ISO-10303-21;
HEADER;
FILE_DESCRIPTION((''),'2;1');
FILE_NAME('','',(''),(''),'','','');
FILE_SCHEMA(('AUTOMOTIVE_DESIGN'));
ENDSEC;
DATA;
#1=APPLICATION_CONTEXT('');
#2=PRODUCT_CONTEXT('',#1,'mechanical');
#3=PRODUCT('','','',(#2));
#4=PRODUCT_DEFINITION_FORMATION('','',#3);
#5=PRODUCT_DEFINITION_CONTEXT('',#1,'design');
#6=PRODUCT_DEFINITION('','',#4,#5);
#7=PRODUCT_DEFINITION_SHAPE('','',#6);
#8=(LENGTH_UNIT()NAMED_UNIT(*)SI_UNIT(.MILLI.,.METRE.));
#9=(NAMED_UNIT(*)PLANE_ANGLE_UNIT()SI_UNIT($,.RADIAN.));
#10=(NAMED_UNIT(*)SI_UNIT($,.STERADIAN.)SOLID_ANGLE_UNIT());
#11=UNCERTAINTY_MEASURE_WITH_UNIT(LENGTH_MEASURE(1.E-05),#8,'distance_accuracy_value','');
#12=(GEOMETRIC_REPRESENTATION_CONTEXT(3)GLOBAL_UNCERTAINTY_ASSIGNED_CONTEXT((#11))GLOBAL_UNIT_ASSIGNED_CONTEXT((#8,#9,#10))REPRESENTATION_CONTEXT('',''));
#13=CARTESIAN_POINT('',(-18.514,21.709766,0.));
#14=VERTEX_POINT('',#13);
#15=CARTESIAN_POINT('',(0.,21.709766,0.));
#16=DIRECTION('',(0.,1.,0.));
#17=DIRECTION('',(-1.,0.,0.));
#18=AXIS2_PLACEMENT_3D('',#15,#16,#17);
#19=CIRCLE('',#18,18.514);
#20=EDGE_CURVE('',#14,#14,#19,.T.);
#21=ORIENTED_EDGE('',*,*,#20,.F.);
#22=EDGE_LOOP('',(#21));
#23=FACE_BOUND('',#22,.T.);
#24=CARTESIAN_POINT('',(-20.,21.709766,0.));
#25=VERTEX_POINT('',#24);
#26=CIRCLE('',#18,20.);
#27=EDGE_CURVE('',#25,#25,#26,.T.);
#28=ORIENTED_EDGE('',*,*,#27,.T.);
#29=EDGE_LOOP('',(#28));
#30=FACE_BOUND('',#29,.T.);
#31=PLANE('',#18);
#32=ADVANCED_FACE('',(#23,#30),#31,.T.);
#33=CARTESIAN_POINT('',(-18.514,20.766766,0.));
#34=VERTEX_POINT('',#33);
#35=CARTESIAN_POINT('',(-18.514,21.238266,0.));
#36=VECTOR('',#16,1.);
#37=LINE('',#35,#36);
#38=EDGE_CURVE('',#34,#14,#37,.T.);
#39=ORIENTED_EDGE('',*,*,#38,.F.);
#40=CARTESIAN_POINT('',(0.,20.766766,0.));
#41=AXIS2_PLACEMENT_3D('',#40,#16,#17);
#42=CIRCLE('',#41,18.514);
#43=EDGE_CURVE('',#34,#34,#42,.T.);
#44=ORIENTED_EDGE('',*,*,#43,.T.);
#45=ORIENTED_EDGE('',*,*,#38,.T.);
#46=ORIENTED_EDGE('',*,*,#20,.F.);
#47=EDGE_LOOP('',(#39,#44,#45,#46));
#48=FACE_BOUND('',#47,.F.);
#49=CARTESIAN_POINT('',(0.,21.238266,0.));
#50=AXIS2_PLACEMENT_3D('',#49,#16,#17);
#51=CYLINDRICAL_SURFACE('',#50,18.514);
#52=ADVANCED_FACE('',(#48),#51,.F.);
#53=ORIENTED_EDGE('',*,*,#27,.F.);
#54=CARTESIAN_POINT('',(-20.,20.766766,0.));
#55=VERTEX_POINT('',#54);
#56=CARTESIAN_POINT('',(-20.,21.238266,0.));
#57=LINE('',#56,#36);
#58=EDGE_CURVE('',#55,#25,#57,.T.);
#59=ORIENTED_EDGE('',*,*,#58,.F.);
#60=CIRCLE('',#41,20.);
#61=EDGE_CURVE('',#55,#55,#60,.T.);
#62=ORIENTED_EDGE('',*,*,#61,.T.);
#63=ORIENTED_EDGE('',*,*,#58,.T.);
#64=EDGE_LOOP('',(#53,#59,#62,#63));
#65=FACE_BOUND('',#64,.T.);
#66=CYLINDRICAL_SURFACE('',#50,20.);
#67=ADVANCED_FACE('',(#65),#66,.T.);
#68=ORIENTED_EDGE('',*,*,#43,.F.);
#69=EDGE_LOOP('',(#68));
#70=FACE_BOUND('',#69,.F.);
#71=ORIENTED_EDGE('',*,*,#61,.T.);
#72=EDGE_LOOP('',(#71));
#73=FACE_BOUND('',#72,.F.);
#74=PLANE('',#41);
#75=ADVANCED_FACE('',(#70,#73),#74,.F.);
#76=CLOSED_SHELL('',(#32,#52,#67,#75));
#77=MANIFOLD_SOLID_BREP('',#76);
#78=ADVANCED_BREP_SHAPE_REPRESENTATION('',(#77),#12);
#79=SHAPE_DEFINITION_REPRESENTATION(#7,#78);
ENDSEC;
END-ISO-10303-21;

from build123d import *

# Parameters (mm, degrees)
F0_W = 1.486
F0_H = 0.943


# Not quite as in the source:
# - the program builds the solid bodies; features that only make, move or delete a surface that nothing else refers to are left out


with BuildPart() as f2:
    # F0 (on Top) → F2 (revolve)
    with BuildSketch(Plane.XY):
        with Locations((-19.257, 21.2382662386)):
            Rectangle(F0_W, F0_H)
    revolve(axis=Axis((0, 37.5, 0), (0, 1, 0)))


solid = f2.part
